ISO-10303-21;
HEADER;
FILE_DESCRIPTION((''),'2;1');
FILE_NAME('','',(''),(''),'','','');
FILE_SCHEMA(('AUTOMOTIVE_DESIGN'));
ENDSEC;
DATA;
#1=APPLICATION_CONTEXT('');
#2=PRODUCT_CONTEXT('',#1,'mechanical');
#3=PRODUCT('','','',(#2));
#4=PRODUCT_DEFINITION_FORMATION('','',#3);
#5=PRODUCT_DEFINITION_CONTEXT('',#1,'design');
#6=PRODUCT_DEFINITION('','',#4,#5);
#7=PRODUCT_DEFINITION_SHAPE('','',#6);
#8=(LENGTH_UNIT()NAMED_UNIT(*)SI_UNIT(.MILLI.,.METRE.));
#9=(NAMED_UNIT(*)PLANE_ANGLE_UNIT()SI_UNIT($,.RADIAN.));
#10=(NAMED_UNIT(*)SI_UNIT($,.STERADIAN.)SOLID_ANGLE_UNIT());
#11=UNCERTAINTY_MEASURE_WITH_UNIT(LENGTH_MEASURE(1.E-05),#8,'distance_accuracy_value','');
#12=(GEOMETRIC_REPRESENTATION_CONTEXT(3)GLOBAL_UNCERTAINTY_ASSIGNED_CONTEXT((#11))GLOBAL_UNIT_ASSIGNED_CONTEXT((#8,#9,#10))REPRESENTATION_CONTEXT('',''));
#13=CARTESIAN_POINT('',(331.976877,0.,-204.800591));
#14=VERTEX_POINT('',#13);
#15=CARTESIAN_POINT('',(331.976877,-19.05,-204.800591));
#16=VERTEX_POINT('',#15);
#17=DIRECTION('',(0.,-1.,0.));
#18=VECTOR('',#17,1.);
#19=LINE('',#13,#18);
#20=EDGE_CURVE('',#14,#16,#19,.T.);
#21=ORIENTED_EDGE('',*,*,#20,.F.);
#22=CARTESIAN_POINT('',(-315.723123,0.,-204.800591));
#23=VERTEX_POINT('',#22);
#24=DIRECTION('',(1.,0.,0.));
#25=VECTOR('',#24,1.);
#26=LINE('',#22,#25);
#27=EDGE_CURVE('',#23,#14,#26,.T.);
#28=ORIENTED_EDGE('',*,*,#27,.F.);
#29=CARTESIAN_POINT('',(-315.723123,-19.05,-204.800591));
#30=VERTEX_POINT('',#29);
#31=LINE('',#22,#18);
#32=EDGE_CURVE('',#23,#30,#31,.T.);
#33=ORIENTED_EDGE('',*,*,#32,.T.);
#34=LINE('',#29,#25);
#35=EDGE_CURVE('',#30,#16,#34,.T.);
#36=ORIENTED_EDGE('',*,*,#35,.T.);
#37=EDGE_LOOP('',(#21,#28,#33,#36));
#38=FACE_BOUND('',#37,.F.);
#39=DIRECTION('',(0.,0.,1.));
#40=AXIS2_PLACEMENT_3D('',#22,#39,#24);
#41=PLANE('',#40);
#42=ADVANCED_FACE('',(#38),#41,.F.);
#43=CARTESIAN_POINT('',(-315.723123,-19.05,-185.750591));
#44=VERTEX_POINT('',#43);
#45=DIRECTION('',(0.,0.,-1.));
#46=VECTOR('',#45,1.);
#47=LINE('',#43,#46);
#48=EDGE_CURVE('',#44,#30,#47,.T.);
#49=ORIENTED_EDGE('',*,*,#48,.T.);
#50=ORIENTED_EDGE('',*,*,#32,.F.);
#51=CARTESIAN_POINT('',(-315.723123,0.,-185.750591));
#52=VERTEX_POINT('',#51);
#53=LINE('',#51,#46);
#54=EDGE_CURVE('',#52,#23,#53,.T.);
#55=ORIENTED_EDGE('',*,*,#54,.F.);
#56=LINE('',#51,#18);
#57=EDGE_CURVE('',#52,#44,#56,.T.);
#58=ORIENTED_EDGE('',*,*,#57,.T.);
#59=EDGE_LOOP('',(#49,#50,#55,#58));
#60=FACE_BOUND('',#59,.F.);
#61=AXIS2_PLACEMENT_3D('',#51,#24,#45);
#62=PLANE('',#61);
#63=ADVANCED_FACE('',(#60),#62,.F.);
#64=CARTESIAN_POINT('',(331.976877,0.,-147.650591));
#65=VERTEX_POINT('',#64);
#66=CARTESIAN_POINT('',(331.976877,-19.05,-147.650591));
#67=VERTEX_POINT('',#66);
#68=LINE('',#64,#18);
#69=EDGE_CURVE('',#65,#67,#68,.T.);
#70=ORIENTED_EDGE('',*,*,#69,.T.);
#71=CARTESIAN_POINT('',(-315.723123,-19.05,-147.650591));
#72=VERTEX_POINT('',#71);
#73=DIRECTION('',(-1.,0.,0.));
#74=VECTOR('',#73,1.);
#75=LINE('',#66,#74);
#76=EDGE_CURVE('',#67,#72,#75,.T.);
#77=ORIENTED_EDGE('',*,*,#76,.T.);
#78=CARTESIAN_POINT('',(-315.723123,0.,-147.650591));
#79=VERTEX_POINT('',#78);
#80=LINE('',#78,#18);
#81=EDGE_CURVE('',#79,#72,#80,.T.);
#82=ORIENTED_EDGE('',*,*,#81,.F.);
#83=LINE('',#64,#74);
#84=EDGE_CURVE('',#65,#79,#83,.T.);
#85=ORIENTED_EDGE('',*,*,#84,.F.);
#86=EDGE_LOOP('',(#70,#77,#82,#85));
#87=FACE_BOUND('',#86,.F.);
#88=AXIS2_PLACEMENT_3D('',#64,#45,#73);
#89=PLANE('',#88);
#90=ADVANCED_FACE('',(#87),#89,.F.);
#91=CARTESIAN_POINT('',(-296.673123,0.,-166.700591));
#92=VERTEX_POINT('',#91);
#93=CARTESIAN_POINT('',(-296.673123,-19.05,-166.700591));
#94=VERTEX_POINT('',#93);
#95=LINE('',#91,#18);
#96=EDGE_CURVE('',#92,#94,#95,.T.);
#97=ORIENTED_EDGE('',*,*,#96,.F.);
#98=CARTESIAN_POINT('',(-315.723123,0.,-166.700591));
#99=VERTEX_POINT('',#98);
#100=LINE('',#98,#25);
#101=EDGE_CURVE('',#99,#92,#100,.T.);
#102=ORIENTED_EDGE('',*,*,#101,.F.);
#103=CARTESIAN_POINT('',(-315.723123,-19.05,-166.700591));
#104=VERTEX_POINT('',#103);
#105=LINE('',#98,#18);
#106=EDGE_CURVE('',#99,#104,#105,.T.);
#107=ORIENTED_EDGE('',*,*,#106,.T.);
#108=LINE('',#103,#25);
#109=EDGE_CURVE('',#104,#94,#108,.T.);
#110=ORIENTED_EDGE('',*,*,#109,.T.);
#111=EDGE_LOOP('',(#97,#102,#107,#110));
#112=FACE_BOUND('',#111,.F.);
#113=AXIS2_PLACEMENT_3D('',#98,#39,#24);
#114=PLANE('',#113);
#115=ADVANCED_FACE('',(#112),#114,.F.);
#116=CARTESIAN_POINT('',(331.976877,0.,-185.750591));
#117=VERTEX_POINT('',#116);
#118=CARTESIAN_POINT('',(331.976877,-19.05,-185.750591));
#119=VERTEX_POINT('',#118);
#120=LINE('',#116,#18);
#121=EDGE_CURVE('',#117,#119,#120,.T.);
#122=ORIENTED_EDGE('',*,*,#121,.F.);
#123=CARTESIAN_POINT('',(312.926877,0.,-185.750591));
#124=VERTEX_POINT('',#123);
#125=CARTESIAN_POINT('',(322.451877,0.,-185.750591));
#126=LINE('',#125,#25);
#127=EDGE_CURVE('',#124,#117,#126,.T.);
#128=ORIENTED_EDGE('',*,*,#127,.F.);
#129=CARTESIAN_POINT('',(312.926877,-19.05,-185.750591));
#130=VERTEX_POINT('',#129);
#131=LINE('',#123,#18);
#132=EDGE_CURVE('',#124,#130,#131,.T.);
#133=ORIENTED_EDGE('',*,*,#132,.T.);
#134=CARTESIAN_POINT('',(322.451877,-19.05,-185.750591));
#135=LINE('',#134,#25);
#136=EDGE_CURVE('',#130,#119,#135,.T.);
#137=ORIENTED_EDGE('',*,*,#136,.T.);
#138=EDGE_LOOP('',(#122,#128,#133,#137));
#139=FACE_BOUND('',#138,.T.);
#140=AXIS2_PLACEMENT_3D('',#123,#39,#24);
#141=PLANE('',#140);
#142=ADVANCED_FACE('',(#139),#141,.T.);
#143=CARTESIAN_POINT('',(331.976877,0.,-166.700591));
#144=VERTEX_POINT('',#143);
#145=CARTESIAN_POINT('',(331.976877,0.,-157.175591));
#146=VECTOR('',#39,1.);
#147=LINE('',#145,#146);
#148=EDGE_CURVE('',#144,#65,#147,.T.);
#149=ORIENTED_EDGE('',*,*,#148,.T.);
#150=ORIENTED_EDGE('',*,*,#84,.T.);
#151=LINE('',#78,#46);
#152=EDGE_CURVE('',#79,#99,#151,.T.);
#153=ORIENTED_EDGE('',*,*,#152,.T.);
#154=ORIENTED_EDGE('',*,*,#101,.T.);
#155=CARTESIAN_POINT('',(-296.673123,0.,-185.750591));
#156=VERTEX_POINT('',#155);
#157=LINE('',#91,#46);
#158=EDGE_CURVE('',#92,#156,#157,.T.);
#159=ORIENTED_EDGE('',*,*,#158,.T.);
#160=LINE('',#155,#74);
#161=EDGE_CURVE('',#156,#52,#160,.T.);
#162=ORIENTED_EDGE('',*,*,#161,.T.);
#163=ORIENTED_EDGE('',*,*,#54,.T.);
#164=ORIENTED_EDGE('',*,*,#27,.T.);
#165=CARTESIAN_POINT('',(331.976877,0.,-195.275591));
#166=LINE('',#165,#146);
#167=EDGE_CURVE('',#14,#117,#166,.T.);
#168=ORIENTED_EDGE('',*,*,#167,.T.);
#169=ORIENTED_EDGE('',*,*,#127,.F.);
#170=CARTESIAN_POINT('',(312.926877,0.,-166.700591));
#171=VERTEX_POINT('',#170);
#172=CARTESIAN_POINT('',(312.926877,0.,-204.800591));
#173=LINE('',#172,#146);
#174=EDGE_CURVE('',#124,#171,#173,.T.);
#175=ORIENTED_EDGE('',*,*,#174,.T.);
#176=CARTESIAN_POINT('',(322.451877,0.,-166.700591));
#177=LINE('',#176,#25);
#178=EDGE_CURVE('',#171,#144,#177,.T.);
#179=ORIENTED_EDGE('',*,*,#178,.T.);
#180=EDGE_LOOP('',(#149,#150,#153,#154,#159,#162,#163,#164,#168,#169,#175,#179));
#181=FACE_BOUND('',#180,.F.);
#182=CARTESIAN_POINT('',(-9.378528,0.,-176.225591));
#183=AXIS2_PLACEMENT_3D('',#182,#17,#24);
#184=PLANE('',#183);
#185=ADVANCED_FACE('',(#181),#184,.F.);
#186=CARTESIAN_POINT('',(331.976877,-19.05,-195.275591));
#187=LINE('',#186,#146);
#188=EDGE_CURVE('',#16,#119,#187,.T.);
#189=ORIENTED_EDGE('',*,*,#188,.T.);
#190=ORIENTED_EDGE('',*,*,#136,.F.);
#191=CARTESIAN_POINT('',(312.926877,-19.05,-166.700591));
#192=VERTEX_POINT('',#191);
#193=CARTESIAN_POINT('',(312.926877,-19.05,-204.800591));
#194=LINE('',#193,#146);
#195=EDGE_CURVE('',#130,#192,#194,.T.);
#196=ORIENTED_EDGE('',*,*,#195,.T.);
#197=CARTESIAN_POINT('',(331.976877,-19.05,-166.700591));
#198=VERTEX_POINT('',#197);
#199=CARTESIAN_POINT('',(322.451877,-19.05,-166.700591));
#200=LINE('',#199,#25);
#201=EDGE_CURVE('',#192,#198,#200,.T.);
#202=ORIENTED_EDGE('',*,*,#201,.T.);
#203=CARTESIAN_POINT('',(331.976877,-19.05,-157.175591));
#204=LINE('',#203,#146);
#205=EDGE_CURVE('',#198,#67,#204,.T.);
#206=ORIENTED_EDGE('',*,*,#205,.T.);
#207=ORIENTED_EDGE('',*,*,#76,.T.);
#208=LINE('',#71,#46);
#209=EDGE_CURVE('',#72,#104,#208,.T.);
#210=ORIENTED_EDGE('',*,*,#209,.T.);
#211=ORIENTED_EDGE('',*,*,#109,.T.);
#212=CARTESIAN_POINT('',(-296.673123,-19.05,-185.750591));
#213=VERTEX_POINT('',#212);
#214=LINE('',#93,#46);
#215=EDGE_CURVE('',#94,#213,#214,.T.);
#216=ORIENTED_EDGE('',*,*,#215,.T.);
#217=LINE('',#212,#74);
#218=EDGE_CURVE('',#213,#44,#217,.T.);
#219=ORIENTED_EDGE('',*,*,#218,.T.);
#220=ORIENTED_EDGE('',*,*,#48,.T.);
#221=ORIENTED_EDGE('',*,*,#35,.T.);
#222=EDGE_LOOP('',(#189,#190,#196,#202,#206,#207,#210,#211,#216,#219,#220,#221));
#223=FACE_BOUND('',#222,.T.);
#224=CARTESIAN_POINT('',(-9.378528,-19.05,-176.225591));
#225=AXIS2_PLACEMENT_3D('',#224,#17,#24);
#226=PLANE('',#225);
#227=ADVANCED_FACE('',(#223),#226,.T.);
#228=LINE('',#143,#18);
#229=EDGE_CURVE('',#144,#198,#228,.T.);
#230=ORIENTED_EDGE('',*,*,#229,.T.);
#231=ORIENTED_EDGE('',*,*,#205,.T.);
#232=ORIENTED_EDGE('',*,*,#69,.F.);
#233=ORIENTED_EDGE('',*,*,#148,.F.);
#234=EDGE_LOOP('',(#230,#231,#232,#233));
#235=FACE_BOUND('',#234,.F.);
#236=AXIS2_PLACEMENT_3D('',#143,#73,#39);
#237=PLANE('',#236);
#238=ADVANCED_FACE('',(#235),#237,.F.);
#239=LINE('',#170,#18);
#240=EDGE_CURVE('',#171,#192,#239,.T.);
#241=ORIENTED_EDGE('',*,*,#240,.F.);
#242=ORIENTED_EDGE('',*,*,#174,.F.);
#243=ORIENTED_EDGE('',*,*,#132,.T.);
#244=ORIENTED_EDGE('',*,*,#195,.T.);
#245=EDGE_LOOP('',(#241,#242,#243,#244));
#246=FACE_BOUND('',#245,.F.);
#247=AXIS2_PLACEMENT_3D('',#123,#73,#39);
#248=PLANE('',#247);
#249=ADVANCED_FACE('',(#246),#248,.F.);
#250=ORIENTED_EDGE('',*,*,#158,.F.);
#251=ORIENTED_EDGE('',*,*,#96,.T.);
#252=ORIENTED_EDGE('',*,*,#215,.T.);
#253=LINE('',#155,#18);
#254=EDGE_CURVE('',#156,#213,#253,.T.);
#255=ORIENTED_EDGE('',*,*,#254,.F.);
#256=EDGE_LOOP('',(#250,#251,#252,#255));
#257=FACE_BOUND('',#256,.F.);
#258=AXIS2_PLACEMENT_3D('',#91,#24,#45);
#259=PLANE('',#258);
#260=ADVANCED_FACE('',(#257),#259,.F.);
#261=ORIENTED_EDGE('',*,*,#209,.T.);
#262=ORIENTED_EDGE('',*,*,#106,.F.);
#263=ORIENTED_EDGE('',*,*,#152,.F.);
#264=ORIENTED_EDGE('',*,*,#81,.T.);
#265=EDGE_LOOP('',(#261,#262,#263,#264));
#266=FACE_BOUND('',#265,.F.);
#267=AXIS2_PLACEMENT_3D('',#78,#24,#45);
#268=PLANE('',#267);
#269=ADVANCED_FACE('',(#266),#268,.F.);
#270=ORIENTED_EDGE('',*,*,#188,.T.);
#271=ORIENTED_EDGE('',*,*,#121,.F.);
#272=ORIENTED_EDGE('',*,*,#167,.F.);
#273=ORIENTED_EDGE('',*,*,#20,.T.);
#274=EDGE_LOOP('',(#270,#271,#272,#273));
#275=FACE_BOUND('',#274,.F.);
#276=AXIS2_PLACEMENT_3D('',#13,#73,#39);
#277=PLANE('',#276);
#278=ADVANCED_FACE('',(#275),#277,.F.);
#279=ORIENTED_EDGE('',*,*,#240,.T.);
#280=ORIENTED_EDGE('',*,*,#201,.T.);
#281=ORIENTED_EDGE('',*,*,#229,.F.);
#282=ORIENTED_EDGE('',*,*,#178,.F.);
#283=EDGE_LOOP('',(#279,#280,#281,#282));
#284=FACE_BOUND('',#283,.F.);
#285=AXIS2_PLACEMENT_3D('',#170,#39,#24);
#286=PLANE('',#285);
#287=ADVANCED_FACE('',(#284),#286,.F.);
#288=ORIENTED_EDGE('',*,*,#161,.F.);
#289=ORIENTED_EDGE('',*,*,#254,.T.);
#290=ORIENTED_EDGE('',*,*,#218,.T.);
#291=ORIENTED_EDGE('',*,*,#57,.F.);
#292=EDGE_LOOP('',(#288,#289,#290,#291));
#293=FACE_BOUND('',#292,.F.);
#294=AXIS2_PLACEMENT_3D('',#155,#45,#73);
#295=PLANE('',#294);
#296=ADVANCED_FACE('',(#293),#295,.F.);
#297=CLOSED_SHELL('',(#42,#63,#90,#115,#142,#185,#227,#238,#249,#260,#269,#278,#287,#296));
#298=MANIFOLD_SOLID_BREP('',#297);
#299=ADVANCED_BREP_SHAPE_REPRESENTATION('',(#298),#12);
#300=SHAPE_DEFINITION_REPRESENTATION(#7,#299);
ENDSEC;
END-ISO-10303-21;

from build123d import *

# Parameters (mm, degrees)
F0_W     = 19.05
F0_H     = 19.05
F1_DEPTH = 19.05


# Not quite as in the source:
# - a feature names something its author has since deleted; it is built from what else it names


with BuildPart() as f1:
    # F0 (on Front) → F1 (new body)
    with BuildSketch(Plane.XZ):
        Polygon((312.9268772483, -147.6505908728), (-296.6731227517, -147.6505908728), (-315.7231227517, -147.6505908728), (-315.7231227517, -166.7005908728), (-296.6731227517, -166.7005908728), (-296.6731227517, -185.7505908728), (-315.7231227517, -185.7505908728), (-315.7231227517, -204.8005908728), (-296.6731227517, -204.8005908728), (312.9268772483, -204.8005908728), (312.9268772483, -185.7505908728), (312.9268772483, -166.7005908728), align=None)
        with Locations((322.4518772483, -157.1755908728)):
            Rectangle(F0_W, F0_H)
        with Locations((322.4518772483, -195.2755908728)):
            Rectangle(F0_W, F0_H)
    extrude(amount=F1_DEPTH)


solid = f1.part
